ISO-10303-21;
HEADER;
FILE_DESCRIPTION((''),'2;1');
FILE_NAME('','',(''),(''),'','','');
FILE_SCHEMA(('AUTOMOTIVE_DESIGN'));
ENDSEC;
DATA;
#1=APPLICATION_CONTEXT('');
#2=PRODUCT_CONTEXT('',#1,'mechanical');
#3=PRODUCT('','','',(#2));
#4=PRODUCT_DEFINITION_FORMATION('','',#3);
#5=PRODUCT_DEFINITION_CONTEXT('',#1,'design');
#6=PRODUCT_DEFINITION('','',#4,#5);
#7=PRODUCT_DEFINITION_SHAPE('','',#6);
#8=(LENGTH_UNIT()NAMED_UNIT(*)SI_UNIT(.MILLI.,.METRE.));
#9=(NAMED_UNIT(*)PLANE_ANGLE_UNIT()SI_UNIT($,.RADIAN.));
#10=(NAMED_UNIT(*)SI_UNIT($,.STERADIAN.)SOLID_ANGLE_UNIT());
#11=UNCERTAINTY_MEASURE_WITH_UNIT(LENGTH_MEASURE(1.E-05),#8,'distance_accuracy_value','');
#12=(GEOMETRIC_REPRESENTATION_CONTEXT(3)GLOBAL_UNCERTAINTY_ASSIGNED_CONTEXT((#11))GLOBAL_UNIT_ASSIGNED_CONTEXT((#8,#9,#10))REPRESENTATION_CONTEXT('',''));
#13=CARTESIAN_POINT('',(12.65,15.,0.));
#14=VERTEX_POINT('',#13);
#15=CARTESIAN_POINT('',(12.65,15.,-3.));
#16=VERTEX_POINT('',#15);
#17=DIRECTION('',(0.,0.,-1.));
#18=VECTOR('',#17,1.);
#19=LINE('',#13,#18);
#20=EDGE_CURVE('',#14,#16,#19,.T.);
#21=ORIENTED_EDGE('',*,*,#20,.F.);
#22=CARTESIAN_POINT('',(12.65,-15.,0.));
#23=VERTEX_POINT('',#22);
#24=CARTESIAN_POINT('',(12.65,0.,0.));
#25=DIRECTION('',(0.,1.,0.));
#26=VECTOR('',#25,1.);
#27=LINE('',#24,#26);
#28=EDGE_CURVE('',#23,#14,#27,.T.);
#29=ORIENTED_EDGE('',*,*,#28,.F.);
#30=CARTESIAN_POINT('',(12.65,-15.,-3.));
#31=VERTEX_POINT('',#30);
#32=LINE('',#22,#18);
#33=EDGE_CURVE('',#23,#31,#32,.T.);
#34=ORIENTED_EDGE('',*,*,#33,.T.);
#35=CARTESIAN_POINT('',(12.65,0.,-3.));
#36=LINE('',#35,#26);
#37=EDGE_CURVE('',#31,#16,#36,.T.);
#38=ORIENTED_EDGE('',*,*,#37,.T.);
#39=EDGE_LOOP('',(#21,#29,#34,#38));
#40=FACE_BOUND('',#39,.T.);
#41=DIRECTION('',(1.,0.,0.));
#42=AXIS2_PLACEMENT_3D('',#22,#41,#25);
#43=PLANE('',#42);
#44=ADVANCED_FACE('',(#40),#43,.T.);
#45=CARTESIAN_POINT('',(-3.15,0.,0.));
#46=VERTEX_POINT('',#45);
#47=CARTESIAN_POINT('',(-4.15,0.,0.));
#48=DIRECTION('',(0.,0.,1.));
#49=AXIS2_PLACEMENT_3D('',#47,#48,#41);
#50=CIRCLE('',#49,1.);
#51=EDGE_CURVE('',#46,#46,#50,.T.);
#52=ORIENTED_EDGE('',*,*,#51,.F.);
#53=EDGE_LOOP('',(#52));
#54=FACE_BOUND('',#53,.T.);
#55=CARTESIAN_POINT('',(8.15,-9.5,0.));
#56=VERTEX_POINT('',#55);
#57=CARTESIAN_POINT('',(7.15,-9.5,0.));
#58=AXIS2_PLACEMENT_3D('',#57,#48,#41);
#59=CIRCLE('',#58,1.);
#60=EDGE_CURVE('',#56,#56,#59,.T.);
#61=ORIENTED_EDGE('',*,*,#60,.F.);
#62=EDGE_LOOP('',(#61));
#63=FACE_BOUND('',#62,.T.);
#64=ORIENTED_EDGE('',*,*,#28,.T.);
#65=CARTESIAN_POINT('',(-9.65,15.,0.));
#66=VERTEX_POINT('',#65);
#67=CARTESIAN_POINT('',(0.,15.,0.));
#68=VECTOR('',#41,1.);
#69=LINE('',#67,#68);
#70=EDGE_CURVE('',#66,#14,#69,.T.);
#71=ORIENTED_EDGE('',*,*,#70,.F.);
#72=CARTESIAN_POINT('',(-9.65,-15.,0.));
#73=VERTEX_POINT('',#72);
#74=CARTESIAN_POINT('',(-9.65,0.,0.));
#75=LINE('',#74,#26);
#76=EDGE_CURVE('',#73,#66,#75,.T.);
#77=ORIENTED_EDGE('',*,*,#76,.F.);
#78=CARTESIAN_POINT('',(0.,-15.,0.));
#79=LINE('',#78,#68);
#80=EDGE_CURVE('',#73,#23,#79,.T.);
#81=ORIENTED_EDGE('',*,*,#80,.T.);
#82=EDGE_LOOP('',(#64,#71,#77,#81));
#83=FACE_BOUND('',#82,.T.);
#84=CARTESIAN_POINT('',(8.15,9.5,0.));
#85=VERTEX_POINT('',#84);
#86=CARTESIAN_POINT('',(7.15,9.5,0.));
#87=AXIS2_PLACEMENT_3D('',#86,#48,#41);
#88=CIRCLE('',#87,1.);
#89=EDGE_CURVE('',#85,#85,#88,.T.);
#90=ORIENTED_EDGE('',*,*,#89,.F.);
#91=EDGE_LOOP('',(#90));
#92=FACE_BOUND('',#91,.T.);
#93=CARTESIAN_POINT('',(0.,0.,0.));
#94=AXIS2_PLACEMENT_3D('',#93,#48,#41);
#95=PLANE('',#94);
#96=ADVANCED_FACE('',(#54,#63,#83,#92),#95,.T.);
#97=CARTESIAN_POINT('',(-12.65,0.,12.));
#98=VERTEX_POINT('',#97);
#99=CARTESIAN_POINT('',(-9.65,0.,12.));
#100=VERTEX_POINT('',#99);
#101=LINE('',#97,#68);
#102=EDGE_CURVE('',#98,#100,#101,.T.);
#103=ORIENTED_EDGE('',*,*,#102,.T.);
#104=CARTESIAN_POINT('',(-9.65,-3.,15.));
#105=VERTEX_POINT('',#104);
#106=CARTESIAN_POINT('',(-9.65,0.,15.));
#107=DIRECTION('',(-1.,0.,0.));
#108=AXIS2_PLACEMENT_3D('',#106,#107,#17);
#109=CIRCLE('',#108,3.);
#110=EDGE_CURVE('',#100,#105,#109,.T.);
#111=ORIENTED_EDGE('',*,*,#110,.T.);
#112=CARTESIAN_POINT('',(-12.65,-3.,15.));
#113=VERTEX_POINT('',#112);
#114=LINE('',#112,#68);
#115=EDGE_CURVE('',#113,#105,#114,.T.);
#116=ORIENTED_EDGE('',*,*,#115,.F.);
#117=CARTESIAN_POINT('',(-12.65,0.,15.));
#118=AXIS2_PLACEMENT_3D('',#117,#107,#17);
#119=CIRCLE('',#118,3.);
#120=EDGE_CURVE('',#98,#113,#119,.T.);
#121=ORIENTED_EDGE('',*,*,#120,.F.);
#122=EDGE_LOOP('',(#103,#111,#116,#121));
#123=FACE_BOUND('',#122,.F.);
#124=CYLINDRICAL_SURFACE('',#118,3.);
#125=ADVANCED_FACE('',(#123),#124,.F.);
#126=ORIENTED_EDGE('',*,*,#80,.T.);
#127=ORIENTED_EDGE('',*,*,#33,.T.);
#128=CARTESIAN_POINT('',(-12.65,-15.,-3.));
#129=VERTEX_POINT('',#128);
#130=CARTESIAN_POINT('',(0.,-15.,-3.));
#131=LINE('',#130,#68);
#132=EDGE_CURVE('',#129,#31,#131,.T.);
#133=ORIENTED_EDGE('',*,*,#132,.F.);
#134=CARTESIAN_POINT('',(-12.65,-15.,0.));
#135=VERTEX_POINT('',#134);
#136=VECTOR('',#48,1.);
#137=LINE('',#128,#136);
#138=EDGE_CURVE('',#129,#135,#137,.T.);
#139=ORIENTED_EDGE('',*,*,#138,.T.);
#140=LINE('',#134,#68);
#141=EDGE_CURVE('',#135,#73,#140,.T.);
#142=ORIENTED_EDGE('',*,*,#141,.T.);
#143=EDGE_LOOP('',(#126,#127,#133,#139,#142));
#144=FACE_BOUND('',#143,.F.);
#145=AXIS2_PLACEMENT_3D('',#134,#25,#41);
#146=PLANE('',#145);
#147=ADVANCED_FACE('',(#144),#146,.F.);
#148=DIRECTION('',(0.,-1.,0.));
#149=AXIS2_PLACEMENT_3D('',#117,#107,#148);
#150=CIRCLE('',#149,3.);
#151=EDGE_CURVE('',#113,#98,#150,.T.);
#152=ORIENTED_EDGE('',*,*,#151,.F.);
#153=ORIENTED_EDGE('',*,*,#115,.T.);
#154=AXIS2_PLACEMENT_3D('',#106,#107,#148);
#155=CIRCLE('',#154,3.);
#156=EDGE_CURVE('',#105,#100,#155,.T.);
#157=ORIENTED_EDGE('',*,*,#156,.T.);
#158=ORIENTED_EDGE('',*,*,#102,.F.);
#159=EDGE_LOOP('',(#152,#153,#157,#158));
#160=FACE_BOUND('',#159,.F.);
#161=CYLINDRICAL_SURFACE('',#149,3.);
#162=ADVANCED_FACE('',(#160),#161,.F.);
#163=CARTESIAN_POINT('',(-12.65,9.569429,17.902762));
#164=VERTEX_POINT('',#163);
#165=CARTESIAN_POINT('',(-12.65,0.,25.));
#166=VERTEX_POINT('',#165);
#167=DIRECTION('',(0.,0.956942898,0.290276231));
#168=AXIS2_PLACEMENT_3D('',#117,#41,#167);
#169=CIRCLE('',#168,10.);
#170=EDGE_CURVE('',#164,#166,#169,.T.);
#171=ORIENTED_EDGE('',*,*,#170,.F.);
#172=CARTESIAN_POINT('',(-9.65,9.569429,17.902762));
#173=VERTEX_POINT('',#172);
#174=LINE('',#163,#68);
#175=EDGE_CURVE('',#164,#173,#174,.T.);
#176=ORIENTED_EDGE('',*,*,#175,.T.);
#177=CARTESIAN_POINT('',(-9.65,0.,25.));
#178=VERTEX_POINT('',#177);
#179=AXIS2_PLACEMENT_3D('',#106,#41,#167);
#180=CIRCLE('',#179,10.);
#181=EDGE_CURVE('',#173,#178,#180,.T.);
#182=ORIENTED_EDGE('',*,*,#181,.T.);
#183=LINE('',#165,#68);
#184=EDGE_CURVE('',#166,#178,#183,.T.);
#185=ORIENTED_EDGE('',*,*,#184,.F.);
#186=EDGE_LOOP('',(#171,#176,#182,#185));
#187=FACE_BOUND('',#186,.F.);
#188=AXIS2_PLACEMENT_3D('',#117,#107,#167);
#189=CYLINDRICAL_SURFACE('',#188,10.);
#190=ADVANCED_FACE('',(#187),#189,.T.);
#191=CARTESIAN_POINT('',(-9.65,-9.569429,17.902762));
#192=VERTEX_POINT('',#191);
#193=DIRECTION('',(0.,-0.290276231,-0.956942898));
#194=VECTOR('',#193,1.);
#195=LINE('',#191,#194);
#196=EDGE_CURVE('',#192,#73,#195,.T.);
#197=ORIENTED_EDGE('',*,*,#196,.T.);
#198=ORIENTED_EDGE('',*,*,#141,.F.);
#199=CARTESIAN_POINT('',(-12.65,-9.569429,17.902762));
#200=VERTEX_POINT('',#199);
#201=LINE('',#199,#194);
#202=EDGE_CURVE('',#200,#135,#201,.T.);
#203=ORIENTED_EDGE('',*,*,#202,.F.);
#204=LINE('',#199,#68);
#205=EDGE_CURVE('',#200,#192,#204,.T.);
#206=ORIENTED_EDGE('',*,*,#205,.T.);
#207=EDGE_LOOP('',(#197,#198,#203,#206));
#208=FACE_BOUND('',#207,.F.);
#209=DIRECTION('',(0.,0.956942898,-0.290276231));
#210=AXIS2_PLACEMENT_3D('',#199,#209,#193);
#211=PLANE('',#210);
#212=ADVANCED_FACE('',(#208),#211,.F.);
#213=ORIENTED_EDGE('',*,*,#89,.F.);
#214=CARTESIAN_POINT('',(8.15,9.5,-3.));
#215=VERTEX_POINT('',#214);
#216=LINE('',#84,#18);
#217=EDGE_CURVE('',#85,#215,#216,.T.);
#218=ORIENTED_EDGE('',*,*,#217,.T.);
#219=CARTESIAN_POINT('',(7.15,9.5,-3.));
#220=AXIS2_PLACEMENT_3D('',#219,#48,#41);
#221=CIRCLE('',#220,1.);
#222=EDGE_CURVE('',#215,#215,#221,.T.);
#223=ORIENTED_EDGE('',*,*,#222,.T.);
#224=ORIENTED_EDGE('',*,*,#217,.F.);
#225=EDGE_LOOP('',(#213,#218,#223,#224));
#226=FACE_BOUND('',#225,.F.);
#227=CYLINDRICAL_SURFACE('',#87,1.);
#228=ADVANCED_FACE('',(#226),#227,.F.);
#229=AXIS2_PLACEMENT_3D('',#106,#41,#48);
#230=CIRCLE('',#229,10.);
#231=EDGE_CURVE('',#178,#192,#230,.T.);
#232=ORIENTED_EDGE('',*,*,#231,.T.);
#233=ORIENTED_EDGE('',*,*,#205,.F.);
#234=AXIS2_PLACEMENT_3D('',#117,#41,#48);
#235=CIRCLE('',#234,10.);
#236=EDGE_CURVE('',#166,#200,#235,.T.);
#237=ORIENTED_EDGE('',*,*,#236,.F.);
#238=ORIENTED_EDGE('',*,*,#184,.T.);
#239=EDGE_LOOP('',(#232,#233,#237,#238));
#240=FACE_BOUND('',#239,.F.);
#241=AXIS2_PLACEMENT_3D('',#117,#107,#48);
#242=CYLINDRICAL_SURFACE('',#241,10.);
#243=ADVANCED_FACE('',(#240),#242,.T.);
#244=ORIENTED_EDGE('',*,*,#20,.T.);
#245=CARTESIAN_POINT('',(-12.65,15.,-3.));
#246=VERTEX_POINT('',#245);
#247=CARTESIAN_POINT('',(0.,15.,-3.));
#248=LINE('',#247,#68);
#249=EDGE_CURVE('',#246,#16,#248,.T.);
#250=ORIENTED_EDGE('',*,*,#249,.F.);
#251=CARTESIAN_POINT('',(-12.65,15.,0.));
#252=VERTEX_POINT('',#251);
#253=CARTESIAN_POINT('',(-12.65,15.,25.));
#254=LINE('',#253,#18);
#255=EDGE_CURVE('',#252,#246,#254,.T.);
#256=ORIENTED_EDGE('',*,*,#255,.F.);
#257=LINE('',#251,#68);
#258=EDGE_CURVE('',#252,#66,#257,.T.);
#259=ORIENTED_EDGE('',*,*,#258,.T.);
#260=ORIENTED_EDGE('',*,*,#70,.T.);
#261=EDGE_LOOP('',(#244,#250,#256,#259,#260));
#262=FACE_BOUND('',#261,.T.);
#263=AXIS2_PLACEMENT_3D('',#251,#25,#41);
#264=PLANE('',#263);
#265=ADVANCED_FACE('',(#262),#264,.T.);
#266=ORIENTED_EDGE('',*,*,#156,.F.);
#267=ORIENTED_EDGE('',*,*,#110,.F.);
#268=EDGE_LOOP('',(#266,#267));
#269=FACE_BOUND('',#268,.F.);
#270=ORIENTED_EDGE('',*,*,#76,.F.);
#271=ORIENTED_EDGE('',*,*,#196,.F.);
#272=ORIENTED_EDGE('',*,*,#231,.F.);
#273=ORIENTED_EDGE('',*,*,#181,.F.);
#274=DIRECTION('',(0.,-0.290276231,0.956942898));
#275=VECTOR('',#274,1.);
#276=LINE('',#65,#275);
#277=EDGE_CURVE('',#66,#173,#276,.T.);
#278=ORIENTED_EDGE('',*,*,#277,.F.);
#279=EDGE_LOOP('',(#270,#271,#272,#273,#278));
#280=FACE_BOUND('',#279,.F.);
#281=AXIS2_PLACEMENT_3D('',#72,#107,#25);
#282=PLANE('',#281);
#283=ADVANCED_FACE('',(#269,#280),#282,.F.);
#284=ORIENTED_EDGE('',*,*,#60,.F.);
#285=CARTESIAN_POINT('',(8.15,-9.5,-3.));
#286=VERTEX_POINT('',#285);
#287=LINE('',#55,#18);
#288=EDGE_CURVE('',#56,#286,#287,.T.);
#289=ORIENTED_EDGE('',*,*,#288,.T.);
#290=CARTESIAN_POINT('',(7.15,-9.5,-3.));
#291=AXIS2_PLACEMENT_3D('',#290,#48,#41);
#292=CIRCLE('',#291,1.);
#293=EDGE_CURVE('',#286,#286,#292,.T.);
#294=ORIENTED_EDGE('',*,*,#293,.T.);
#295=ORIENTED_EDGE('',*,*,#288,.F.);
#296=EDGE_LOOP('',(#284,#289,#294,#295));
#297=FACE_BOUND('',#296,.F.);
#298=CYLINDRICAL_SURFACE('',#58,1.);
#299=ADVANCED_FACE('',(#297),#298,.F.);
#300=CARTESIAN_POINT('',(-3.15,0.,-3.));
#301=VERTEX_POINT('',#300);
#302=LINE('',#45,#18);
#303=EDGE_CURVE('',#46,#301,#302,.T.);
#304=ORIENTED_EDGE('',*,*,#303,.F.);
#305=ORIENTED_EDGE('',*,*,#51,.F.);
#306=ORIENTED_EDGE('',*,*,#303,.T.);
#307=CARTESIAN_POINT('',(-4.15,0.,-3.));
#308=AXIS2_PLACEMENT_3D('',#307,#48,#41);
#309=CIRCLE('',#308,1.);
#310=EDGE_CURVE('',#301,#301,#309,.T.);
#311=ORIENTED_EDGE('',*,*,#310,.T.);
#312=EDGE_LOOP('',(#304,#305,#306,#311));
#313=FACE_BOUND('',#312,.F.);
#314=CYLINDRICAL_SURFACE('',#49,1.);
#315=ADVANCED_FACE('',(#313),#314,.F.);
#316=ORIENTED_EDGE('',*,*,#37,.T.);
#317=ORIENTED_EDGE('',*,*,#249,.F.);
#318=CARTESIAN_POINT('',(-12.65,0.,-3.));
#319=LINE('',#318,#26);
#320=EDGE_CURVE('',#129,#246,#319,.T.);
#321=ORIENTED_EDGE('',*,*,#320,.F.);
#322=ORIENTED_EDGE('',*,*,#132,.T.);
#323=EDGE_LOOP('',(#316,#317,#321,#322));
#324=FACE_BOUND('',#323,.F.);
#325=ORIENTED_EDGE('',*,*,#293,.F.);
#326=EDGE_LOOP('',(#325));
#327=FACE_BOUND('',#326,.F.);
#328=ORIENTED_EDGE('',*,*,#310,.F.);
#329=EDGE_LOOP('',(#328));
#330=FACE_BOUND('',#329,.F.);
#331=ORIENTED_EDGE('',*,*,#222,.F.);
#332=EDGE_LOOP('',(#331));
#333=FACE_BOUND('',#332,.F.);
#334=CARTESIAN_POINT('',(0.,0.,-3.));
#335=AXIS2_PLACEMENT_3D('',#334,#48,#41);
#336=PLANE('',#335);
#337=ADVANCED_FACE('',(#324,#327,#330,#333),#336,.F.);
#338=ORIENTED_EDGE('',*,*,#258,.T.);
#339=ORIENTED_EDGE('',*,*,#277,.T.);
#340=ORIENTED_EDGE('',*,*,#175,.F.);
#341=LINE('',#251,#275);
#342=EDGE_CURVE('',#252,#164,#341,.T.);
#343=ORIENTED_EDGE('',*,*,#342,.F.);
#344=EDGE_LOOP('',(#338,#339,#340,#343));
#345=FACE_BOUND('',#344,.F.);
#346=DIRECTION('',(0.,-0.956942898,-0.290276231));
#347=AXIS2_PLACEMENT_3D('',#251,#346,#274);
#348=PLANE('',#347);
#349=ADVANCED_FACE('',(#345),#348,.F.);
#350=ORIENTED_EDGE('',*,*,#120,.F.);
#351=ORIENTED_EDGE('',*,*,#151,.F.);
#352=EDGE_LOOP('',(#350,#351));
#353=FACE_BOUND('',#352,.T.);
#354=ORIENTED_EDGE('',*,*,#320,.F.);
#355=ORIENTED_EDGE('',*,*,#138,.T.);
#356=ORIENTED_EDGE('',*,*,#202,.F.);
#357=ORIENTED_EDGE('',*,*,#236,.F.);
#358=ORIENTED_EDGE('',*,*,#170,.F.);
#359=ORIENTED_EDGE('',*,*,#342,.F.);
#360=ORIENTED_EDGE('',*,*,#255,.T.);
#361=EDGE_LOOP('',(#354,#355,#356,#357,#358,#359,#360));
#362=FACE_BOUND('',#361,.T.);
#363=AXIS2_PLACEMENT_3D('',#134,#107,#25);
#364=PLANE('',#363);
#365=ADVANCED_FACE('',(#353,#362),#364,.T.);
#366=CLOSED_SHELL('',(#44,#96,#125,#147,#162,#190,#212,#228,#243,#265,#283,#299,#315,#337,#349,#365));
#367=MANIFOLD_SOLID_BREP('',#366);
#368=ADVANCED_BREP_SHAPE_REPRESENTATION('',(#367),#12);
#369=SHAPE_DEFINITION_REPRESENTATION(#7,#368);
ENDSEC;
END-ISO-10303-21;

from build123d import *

# Parameters (mm, degrees)
F0_W     = 25.3
F0_H     = 30
F1_DEPTH = 3
F2_W     = 3
F2_H     = 30
F3_DEPTH = 25
F5_DEPTH = 3
F6_R     = 1
F7_DEPTH = 3


# Not quite as in the source:
# - a feature names something its author has since deleted; it is built from what else it names


with BuildPart() as f1:
    # F0 (on Top) → F1 (new body)
    with BuildSketch(Plane.XY):
        Rectangle(F0_W, F0_H)
    extrude(amount=-F1_DEPTH)

    # F2 (on face) → F3 (join)
    with BuildSketch(Plane.XY):
        with Locations((-11.15, 0)):
            Rectangle(F2_W, F2_H)
    extrude(amount=F3_DEPTH)

    # F4 (on face) → F5 (cut)
    with BuildSketch(Plane(origin=(-12.65, 0, 0), x_dir=(0, -1, 0), z_dir=(-1, 0, 0))):
        with BuildLine():
            ThreePointArc((3, 15), (-2.1213203436, 17.1213203436), (0, 12))
            ThreePointArc((0, 12), (2.1213203436, 12.8786796564), (3, 15))
        make_face()
        with BuildLine():
            Line((-15, 25), (-15, 0))
            Line((-15, 0), (-9.569428978, 17.9027623113))
            ThreePointArc((-9.569428978, 17.9027623113), (-5.9570284911, 23.032049026), (0, 25))
            Line((0, 25), (-15, 25))
        make_face()
        with BuildLine():
            Line((9.569428978, 17.9027623113), (15, 0))
            Line((15, 0), (15, 25))
            Line((15, 25), (0, 25))
            ThreePointArc((0, 25), (5.9570284911, 23.032049026), (9.569428978, 17.9027623113))
        make_face()
    extrude(amount=-F5_DEPTH, mode=Mode.SUBTRACT)

    # F6 (on face) → F7 (cut)
    with BuildSketch(Plane.XY):
        with Locations((7.15, -9.5)):
            Circle(F6_R)
        with Locations((-4.15, 0)):
            Circle(F6_R)
        with Locations((7.15, 9.5)):
            Circle(F6_R)
    extrude(amount=-F7_DEPTH, mode=Mode.SUBTRACT)


solid = f1.part
